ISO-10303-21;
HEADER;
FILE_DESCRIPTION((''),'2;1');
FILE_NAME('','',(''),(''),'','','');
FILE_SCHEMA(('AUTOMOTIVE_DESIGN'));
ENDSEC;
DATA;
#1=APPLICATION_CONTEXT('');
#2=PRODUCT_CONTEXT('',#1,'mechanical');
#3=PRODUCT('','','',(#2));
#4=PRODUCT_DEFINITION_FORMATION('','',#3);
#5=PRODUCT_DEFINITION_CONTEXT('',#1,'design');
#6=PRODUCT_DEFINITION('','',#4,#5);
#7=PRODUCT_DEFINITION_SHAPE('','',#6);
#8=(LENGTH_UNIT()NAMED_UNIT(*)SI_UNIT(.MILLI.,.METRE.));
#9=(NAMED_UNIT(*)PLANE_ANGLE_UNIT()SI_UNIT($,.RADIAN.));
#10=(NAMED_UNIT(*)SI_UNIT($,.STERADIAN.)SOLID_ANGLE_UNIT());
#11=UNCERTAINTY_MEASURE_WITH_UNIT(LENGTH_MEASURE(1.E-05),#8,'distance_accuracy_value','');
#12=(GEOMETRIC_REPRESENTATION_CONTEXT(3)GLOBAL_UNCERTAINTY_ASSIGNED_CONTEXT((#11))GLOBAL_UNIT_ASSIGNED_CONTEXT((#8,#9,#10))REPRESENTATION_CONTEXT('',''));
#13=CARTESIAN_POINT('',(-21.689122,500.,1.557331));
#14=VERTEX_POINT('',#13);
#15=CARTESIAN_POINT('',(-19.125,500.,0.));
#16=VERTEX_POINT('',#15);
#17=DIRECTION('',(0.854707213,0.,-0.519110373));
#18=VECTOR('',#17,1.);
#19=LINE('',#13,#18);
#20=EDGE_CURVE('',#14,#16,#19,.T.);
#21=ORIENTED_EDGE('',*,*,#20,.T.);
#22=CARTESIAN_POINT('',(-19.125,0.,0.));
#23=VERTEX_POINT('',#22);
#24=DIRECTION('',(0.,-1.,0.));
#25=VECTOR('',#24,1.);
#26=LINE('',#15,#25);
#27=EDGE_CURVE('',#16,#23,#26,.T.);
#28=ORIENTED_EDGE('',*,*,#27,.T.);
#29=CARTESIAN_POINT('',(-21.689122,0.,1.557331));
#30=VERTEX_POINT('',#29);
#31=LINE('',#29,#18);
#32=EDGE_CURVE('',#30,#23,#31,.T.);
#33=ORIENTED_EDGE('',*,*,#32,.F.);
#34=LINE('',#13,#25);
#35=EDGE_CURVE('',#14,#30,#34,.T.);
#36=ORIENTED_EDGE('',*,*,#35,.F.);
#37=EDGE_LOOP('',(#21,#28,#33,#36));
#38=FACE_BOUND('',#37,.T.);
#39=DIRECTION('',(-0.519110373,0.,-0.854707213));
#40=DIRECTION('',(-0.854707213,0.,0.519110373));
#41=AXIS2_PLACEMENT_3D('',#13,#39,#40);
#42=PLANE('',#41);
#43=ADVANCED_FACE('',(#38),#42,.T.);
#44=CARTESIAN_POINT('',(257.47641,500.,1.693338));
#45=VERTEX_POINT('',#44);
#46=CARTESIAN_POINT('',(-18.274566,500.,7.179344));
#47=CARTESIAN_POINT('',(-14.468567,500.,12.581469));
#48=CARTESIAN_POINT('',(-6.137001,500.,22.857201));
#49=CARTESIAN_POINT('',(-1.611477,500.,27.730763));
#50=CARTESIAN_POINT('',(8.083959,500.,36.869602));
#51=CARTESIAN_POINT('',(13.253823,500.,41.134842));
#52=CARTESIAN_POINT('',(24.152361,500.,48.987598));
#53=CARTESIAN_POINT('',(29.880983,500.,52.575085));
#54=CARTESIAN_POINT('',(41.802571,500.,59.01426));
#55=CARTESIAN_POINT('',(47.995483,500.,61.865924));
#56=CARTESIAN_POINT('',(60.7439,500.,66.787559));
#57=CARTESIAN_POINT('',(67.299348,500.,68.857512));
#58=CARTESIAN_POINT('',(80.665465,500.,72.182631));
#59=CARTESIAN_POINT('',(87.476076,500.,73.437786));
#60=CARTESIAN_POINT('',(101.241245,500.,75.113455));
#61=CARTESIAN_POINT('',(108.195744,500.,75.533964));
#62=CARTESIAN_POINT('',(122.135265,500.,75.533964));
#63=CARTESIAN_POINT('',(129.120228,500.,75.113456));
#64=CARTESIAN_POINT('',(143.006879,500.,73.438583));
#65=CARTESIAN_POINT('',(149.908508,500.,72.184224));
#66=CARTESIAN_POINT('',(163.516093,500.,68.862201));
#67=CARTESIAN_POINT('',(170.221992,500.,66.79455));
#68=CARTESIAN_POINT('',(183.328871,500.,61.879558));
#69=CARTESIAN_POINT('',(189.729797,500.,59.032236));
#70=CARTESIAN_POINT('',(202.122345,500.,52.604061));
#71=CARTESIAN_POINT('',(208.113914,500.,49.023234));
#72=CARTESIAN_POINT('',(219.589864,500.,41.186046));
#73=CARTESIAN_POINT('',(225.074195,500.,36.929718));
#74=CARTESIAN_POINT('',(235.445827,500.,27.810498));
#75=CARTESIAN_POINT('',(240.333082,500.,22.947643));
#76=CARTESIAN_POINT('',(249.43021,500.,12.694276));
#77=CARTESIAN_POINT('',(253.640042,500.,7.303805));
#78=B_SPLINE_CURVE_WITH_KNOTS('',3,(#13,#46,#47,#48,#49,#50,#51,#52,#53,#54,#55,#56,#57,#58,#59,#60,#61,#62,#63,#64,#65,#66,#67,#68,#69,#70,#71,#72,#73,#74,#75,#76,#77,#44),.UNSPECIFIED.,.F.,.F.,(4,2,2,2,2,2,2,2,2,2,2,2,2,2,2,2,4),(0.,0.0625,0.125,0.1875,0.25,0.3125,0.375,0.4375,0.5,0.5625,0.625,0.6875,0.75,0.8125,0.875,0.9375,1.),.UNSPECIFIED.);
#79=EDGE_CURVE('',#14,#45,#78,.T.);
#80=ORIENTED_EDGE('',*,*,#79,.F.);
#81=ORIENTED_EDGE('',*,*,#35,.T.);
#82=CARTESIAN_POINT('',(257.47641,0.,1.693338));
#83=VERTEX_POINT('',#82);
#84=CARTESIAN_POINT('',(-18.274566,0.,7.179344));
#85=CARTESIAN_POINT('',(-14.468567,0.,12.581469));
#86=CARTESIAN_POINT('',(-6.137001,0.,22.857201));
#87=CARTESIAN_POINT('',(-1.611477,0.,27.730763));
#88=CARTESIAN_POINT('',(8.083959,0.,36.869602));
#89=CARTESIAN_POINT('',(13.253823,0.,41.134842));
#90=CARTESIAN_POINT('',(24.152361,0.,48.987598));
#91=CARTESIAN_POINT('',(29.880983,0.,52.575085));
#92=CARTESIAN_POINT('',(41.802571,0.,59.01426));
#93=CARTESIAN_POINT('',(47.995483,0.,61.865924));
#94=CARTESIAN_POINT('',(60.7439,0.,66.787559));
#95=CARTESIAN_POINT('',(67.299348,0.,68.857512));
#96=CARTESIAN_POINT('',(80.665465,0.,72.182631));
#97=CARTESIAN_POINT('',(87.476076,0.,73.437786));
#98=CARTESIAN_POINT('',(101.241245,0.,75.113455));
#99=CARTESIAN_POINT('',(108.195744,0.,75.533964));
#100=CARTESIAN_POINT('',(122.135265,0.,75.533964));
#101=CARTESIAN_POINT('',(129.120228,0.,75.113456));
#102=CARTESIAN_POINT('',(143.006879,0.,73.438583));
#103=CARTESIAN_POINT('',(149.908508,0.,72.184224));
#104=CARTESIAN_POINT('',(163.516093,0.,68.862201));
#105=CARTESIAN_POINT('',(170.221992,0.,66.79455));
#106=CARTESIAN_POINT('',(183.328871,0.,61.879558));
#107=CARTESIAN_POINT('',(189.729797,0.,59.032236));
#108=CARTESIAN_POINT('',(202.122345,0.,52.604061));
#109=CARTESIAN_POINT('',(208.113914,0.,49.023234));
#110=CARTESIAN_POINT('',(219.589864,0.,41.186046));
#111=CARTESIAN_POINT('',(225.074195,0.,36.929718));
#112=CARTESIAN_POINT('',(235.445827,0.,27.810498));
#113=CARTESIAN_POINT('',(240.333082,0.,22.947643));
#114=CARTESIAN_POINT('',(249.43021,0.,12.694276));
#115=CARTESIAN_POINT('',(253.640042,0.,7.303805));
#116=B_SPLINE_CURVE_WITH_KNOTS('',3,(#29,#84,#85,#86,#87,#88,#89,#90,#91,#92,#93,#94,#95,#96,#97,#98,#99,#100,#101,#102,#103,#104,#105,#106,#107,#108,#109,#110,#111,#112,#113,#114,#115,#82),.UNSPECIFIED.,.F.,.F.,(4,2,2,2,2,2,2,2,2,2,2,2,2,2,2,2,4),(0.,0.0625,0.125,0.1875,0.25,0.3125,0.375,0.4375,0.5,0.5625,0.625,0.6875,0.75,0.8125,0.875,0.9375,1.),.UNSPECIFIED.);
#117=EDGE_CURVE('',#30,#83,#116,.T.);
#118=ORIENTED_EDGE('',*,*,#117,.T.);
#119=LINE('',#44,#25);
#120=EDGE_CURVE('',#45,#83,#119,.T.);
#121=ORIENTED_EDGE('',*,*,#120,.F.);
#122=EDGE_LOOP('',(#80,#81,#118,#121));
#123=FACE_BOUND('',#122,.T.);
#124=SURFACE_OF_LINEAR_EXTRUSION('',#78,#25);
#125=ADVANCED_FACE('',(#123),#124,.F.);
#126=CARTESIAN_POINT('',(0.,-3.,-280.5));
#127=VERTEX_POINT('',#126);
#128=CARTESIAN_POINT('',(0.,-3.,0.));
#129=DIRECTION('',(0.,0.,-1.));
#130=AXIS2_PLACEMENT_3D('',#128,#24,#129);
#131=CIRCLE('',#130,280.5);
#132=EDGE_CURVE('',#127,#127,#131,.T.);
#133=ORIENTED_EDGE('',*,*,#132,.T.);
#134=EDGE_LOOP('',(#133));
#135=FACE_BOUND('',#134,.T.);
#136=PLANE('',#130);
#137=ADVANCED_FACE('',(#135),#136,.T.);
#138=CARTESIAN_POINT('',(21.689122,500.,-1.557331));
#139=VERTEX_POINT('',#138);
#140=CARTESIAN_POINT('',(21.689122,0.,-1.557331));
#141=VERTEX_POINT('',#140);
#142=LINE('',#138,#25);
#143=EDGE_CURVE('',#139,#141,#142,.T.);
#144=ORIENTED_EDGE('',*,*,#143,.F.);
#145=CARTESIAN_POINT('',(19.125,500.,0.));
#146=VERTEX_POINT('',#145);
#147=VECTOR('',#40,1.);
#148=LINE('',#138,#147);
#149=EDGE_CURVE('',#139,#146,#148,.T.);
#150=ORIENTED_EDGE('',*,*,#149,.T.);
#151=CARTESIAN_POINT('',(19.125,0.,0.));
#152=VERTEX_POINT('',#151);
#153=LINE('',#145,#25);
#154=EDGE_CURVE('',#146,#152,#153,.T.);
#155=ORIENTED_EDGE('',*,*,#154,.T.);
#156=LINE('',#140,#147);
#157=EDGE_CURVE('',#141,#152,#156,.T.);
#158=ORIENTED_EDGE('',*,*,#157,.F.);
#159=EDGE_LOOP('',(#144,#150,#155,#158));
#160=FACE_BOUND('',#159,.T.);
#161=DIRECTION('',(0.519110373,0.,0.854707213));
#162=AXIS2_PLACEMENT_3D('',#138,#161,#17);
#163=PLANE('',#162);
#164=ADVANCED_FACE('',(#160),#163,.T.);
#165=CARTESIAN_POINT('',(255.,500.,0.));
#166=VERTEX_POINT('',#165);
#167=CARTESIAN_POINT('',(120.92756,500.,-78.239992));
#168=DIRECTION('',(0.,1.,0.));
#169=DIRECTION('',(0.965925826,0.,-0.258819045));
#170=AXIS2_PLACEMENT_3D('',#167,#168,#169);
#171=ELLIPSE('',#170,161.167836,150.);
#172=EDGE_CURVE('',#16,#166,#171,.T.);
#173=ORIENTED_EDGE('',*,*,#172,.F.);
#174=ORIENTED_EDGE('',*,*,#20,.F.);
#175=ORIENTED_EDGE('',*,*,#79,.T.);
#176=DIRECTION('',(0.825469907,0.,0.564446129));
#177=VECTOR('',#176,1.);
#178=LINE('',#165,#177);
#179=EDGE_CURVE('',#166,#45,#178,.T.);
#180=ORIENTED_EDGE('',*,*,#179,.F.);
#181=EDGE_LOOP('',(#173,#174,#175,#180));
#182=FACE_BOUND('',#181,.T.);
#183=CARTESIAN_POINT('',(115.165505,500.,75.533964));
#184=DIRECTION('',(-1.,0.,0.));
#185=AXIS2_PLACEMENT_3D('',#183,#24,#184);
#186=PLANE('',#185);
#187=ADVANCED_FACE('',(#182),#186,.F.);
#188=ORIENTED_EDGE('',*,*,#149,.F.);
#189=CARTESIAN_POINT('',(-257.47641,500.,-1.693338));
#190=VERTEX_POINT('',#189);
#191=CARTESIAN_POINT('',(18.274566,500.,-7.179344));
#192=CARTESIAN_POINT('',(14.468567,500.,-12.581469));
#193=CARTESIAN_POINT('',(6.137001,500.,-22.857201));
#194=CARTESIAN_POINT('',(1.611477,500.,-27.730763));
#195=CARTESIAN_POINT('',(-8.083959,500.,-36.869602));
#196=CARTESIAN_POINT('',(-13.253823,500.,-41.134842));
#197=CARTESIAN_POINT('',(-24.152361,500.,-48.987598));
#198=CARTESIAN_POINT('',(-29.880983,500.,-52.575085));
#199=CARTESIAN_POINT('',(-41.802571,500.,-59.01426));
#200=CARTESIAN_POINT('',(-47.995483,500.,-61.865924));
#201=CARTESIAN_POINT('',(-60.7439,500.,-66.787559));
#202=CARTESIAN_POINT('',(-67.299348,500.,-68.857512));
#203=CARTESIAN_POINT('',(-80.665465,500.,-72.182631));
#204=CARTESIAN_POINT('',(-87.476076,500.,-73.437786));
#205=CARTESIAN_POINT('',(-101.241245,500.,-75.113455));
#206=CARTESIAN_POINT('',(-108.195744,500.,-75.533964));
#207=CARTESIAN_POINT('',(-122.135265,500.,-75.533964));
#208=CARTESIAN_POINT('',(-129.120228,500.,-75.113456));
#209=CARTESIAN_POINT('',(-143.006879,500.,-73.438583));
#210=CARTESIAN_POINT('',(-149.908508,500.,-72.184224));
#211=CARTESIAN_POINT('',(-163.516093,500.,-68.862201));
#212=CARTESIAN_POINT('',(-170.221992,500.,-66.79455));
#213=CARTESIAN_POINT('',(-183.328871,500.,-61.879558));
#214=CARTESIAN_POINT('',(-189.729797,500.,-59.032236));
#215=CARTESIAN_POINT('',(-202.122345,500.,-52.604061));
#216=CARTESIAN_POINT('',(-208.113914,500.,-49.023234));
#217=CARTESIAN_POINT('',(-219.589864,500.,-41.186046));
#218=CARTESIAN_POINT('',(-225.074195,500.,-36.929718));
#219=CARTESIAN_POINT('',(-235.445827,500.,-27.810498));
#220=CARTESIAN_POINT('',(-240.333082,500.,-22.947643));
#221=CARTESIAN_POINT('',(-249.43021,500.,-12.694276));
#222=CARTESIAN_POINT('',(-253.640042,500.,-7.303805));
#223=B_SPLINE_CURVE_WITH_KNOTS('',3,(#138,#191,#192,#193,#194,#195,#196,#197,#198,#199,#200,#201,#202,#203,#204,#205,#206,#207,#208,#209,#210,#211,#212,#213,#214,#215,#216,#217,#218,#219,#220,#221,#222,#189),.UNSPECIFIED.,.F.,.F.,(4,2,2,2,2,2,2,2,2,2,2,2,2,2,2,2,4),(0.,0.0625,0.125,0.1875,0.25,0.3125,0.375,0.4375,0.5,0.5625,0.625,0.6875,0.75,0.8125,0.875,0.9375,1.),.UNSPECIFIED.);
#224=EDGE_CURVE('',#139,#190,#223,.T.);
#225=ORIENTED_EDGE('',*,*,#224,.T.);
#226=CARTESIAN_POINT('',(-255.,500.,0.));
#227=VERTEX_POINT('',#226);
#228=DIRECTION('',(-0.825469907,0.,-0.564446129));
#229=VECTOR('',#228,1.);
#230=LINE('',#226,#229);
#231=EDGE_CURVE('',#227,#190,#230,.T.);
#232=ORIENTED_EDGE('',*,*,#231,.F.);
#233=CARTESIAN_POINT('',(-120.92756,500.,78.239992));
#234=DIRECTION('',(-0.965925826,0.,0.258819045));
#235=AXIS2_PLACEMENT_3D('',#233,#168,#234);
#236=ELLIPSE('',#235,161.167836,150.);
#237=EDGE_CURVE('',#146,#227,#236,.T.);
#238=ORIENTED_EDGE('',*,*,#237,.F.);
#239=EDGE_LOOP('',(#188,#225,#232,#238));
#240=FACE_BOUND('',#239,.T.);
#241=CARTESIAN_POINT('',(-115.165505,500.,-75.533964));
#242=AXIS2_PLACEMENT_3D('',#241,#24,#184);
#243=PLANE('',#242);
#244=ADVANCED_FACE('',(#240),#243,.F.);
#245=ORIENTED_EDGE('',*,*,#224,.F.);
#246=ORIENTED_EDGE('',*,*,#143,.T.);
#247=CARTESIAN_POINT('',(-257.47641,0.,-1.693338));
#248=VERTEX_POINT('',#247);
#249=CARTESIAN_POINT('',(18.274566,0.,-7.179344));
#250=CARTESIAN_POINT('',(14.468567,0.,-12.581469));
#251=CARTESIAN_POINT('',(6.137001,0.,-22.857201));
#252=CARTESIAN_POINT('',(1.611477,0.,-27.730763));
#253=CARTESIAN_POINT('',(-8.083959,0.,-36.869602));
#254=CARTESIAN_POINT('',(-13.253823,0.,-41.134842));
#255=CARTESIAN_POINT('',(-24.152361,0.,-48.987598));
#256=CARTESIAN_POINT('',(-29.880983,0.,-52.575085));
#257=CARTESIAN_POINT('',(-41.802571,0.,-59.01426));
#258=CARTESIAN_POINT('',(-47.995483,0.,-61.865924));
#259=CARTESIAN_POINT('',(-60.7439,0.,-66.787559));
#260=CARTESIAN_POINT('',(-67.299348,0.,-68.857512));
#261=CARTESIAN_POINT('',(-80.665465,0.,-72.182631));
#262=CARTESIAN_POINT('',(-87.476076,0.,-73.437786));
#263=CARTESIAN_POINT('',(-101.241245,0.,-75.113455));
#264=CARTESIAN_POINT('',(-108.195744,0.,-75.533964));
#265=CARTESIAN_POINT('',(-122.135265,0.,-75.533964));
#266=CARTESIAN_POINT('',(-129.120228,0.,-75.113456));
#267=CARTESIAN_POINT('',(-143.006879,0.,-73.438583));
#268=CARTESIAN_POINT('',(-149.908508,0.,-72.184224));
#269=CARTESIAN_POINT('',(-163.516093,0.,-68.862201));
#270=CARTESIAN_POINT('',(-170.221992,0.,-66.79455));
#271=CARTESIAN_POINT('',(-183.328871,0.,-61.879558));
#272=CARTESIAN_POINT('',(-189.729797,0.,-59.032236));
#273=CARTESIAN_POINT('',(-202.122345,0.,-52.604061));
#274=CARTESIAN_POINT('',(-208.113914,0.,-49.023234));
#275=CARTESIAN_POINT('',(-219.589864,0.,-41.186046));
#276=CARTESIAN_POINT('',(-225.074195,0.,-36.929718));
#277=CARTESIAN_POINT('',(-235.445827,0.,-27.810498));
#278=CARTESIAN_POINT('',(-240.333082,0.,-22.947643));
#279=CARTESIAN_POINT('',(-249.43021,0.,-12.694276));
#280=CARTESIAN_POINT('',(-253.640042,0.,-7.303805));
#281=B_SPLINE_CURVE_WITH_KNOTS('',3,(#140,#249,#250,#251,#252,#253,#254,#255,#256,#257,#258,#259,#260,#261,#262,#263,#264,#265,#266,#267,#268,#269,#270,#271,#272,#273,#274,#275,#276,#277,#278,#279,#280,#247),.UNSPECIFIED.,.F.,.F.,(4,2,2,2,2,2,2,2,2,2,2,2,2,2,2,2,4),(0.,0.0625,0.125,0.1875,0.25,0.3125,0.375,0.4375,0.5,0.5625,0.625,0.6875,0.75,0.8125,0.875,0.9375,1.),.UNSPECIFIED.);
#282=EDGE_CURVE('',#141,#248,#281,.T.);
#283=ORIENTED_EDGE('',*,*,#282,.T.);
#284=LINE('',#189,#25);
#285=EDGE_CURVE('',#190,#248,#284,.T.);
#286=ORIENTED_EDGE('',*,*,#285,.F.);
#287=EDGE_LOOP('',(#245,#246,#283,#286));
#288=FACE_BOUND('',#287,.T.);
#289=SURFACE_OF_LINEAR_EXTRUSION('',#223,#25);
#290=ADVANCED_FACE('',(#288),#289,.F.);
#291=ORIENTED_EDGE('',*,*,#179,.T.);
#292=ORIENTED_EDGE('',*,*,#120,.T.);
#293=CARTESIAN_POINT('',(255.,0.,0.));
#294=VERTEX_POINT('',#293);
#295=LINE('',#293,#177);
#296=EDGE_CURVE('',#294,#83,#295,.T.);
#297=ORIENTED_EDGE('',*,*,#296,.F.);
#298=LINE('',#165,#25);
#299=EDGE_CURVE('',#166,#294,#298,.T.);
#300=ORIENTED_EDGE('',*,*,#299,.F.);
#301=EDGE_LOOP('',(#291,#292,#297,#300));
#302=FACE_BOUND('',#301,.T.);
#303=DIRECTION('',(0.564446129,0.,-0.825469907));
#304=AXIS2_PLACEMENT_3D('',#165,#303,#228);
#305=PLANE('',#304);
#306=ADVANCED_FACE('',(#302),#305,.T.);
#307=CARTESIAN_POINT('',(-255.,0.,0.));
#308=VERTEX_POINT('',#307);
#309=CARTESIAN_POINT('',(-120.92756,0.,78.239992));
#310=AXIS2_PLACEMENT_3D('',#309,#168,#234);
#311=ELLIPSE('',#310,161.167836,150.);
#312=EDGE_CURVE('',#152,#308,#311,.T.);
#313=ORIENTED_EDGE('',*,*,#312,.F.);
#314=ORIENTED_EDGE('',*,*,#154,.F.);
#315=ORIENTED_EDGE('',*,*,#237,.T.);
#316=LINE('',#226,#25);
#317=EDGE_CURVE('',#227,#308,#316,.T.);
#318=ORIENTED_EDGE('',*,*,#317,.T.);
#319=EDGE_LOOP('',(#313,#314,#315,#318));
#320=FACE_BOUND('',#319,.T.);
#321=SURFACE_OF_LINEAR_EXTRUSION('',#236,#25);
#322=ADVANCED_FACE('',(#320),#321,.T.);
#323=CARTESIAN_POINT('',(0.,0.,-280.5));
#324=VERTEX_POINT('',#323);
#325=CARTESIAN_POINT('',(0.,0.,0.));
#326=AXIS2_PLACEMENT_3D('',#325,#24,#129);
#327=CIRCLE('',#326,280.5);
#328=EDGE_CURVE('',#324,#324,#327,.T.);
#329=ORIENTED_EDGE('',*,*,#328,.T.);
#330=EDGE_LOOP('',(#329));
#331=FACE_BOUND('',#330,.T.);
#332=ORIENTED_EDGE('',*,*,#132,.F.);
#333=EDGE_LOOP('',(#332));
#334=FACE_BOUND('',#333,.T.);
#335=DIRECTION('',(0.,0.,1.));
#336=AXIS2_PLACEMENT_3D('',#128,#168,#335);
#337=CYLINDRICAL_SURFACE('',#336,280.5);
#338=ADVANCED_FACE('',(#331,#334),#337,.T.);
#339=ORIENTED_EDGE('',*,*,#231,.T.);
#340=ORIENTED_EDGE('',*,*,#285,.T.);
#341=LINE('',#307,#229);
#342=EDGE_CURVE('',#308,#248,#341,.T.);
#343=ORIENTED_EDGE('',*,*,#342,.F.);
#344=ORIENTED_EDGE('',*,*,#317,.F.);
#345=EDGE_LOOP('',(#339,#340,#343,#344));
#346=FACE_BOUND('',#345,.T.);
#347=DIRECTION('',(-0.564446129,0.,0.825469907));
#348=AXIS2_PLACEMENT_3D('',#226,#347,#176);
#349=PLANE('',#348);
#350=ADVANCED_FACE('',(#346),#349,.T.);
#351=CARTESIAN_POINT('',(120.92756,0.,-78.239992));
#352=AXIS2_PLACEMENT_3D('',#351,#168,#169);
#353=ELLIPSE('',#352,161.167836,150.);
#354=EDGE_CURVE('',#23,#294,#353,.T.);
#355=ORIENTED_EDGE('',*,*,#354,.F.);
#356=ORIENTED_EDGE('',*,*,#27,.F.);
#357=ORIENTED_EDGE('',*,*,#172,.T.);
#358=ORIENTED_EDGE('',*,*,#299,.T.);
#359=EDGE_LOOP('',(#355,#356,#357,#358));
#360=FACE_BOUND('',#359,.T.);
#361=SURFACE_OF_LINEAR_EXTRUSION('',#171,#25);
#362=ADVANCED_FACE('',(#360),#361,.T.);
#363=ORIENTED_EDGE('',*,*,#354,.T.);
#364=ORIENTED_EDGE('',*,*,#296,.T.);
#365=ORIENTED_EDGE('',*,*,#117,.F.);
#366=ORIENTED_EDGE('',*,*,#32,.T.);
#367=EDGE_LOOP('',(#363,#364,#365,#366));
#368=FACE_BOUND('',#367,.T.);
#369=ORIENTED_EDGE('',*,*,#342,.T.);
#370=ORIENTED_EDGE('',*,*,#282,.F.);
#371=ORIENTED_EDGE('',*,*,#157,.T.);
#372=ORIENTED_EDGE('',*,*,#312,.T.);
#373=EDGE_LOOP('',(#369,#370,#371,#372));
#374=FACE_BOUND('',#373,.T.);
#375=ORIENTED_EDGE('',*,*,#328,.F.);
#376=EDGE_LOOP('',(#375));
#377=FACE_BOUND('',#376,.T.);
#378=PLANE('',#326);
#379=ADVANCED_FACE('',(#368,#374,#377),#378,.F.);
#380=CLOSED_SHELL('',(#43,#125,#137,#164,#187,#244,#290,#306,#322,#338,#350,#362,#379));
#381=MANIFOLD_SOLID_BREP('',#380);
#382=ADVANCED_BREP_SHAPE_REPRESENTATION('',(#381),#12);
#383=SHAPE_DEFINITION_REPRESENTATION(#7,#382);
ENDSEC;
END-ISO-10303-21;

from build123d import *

# Parameters (mm, degrees)
EXTRUIR_L_MINA1_DEPTH      = 500
CROQUIS2_R                 = 280.5
SALIENTE_EXTRUIR8_DEPTH    = 3
S_LIDO_MOVER_COPIAR1_ANGLE = 90
S_LIDO_MOVER_COPIAR4_ANGLE = 30
S_LIDO_MOVER_COPIAR5_ANGLE = 60


# Read off the part's stored shape, not the designer's step: Extruir-Lámina1
with BuildPart() as part:
    # Extruir-Lámina1 outline → Extruir-Lámina1 (new body)
    with BuildSketch(Plane(origin=(0, 0, 0), x_dir=(1, 0, 0), z_dir=(0, 1, 0))):
        with BuildLine():
            Line((19.125, 0), (21.689121639, 1.55733112))
            add(Edge.make_bspline(
                [(21.689121639, 1.55733112), (18.27456602, 7.179344216), (14.468567133, 12.58146888), (6.137000956, 22.857201022), (1.611477285, 27.730763019), (-8.083958794, 36.869602289), (-13.2538227, 41.134841579), (-24.152360559, 48.987598355), (-29.880982541, 52.57508506), (-41.802571029, 59.014260096), (-47.995483026, 61.86592441), (-60.743899677, 66.787558946), (-67.299347885, 68.857511587), (-80.66546522, 72.182630798), (-87.476076438, 73.437786088), (-101.241245358, 75.113454945), (-108.195744184, 75.533963547), (-122.135265016, 75.533963547), (-129.120227784, 75.11345637), (-143.006878519, 73.438582894), (-149.908507595, 72.184224449), (-163.516093081, 68.862201003), (-170.221991731, 66.794550222), (-183.32887145, 61.879557712), (-189.72979668, 59.032236383), (-202.122344676, 52.60406126), (-208.113914261, 49.023233744), (-219.589864266, 41.186046151), (-225.074194803, 36.929717852), (-235.445826562, 27.810497666), (-240.333081724, 22.947642672), (-249.430210223, 12.694275615), (-253.640041761, 7.303805252), (-257.476409721, 1.693338387)],
                knots=[0, 0, 0, 0, 0.0625, 0.0625, 0.125, 0.125, 0.1875, 0.1875, 0.25, 0.25, 0.3125, 0.3125, 0.375, 0.375, 0.4375, 0.4375, 0.5, 0.5, 0.5625, 0.5625, 0.625, 0.625, 0.6875, 0.6875, 0.75, 0.75, 0.8125, 0.8125, 0.875, 0.875, 0.9375, 0.9375, 1, 1, 1, 1], degree=3))
            Line((-257.476409721, 1.693338387), (-255, 0))
            add(Edge.make_bspline(
                [(19.125, 0), (-109.823674921, 212.312001871), (-255, 0)],
                knots=[3.406864615, 3.406864615, 3.406864615, 5.457277421, 5.457277421, 5.457277421], degree=2, weights=[1, 0.51892246, 1]))
        make_face()
        with BuildLine():
            Line((-19.125, 0), (-21.689121639, -1.55733112))
            add(Edge.make_bspline(
                [(-21.689121639, -1.55733112), (-18.27456602, -7.179344216), (-14.468567133, -12.58146888), (-6.137000956, -22.857201022), (-1.611477285, -27.730763019), (8.083958794, -36.869602289), (13.2538227, -41.134841579), (24.152360559, -48.987598355), (29.880982541, -52.57508506), (41.802571029, -59.014260096), (47.995483026, -61.86592441), (60.743899677, -66.787558946), (67.299347885, -68.857511587), (80.66546522, -72.182630798), (87.476076438, -73.437786088), (101.241245358, -75.113454945), (108.195744184, -75.533963547), (122.135265016, -75.533963547), (129.120227784, -75.11345637), (143.006878519, -73.438582894), (149.908507595, -72.184224449), (163.516093081, -68.862201003), (170.221991731, -66.794550222), (183.32887145, -61.879557712), (189.72979668, -59.032236383), (202.122344676, -52.60406126), (208.113914261, -49.023233744), (219.589864266, -41.186046151), (225.074194803, -36.929717852), (235.445826562, -27.810497666), (240.333081724, -22.947642672), (249.430210223, -12.694275615), (253.640041761, -7.303805252), (257.476409721, -1.693338387)],
                knots=[0, 0, 0, 0, 0.0625, 0.0625, 0.125, 0.125, 0.1875, 0.1875, 0.25, 0.25, 0.3125, 0.3125, 0.375, 0.375, 0.4375, 0.4375, 0.5, 0.5, 0.5625, 0.5625, 0.625, 0.625, 0.6875, 0.6875, 0.75, 0.75, 0.8125, 0.8125, 0.875, 0.875, 0.9375, 0.9375, 1, 1, 1, 1], degree=3))
            Line((257.476409721, -1.693338387), (255, 0))
            add(Edge.make_bspline(
                [(-19.125, 0), (109.823674921, -212.312001871), (255, 0)],
                knots=[3.406864615, 3.406864615, 3.406864615, 5.457277421, 5.457277421, 5.457277421], degree=2, weights=[1, 0.51892246, 1]))
        make_face()
    extrude(amount=EXTRUIR_L_MINA1_DEPTH)

    # Croquis2 → Saliente-Extruir8 (add)
    with BuildSketch(Plane.XZ):
        with Locations(Location((0, 0, 0), (0, 0, 270))):
            Circle(CROQUIS2_R)
    extrude(amount=SALIENTE_EXTRUIR8_DEPTH)


with BuildPart() as part_1:
    # Sólido-Mover/Copiar1: moved
    add(part.part.rotate(Axis((0, 0, 0), (0, -1, 0)), S_LIDO_MOVER_COPIAR1_ANGLE))


with BuildPart() as part_2:
    # Sólido-Mover/Copiar4: moved
    add(part_1.part.rotate(Axis((0, 0, 0), (0, 1, 0)), S_LIDO_MOVER_COPIAR4_ANGLE))


with BuildPart() as part_3:
    # Sólido-Mover/Copiar5: moved
    add(part_2.part.rotate(Axis((0, 0, 0), (0, 1, 0)), S_LIDO_MOVER_COPIAR5_ANGLE))


solid = part_3.part
